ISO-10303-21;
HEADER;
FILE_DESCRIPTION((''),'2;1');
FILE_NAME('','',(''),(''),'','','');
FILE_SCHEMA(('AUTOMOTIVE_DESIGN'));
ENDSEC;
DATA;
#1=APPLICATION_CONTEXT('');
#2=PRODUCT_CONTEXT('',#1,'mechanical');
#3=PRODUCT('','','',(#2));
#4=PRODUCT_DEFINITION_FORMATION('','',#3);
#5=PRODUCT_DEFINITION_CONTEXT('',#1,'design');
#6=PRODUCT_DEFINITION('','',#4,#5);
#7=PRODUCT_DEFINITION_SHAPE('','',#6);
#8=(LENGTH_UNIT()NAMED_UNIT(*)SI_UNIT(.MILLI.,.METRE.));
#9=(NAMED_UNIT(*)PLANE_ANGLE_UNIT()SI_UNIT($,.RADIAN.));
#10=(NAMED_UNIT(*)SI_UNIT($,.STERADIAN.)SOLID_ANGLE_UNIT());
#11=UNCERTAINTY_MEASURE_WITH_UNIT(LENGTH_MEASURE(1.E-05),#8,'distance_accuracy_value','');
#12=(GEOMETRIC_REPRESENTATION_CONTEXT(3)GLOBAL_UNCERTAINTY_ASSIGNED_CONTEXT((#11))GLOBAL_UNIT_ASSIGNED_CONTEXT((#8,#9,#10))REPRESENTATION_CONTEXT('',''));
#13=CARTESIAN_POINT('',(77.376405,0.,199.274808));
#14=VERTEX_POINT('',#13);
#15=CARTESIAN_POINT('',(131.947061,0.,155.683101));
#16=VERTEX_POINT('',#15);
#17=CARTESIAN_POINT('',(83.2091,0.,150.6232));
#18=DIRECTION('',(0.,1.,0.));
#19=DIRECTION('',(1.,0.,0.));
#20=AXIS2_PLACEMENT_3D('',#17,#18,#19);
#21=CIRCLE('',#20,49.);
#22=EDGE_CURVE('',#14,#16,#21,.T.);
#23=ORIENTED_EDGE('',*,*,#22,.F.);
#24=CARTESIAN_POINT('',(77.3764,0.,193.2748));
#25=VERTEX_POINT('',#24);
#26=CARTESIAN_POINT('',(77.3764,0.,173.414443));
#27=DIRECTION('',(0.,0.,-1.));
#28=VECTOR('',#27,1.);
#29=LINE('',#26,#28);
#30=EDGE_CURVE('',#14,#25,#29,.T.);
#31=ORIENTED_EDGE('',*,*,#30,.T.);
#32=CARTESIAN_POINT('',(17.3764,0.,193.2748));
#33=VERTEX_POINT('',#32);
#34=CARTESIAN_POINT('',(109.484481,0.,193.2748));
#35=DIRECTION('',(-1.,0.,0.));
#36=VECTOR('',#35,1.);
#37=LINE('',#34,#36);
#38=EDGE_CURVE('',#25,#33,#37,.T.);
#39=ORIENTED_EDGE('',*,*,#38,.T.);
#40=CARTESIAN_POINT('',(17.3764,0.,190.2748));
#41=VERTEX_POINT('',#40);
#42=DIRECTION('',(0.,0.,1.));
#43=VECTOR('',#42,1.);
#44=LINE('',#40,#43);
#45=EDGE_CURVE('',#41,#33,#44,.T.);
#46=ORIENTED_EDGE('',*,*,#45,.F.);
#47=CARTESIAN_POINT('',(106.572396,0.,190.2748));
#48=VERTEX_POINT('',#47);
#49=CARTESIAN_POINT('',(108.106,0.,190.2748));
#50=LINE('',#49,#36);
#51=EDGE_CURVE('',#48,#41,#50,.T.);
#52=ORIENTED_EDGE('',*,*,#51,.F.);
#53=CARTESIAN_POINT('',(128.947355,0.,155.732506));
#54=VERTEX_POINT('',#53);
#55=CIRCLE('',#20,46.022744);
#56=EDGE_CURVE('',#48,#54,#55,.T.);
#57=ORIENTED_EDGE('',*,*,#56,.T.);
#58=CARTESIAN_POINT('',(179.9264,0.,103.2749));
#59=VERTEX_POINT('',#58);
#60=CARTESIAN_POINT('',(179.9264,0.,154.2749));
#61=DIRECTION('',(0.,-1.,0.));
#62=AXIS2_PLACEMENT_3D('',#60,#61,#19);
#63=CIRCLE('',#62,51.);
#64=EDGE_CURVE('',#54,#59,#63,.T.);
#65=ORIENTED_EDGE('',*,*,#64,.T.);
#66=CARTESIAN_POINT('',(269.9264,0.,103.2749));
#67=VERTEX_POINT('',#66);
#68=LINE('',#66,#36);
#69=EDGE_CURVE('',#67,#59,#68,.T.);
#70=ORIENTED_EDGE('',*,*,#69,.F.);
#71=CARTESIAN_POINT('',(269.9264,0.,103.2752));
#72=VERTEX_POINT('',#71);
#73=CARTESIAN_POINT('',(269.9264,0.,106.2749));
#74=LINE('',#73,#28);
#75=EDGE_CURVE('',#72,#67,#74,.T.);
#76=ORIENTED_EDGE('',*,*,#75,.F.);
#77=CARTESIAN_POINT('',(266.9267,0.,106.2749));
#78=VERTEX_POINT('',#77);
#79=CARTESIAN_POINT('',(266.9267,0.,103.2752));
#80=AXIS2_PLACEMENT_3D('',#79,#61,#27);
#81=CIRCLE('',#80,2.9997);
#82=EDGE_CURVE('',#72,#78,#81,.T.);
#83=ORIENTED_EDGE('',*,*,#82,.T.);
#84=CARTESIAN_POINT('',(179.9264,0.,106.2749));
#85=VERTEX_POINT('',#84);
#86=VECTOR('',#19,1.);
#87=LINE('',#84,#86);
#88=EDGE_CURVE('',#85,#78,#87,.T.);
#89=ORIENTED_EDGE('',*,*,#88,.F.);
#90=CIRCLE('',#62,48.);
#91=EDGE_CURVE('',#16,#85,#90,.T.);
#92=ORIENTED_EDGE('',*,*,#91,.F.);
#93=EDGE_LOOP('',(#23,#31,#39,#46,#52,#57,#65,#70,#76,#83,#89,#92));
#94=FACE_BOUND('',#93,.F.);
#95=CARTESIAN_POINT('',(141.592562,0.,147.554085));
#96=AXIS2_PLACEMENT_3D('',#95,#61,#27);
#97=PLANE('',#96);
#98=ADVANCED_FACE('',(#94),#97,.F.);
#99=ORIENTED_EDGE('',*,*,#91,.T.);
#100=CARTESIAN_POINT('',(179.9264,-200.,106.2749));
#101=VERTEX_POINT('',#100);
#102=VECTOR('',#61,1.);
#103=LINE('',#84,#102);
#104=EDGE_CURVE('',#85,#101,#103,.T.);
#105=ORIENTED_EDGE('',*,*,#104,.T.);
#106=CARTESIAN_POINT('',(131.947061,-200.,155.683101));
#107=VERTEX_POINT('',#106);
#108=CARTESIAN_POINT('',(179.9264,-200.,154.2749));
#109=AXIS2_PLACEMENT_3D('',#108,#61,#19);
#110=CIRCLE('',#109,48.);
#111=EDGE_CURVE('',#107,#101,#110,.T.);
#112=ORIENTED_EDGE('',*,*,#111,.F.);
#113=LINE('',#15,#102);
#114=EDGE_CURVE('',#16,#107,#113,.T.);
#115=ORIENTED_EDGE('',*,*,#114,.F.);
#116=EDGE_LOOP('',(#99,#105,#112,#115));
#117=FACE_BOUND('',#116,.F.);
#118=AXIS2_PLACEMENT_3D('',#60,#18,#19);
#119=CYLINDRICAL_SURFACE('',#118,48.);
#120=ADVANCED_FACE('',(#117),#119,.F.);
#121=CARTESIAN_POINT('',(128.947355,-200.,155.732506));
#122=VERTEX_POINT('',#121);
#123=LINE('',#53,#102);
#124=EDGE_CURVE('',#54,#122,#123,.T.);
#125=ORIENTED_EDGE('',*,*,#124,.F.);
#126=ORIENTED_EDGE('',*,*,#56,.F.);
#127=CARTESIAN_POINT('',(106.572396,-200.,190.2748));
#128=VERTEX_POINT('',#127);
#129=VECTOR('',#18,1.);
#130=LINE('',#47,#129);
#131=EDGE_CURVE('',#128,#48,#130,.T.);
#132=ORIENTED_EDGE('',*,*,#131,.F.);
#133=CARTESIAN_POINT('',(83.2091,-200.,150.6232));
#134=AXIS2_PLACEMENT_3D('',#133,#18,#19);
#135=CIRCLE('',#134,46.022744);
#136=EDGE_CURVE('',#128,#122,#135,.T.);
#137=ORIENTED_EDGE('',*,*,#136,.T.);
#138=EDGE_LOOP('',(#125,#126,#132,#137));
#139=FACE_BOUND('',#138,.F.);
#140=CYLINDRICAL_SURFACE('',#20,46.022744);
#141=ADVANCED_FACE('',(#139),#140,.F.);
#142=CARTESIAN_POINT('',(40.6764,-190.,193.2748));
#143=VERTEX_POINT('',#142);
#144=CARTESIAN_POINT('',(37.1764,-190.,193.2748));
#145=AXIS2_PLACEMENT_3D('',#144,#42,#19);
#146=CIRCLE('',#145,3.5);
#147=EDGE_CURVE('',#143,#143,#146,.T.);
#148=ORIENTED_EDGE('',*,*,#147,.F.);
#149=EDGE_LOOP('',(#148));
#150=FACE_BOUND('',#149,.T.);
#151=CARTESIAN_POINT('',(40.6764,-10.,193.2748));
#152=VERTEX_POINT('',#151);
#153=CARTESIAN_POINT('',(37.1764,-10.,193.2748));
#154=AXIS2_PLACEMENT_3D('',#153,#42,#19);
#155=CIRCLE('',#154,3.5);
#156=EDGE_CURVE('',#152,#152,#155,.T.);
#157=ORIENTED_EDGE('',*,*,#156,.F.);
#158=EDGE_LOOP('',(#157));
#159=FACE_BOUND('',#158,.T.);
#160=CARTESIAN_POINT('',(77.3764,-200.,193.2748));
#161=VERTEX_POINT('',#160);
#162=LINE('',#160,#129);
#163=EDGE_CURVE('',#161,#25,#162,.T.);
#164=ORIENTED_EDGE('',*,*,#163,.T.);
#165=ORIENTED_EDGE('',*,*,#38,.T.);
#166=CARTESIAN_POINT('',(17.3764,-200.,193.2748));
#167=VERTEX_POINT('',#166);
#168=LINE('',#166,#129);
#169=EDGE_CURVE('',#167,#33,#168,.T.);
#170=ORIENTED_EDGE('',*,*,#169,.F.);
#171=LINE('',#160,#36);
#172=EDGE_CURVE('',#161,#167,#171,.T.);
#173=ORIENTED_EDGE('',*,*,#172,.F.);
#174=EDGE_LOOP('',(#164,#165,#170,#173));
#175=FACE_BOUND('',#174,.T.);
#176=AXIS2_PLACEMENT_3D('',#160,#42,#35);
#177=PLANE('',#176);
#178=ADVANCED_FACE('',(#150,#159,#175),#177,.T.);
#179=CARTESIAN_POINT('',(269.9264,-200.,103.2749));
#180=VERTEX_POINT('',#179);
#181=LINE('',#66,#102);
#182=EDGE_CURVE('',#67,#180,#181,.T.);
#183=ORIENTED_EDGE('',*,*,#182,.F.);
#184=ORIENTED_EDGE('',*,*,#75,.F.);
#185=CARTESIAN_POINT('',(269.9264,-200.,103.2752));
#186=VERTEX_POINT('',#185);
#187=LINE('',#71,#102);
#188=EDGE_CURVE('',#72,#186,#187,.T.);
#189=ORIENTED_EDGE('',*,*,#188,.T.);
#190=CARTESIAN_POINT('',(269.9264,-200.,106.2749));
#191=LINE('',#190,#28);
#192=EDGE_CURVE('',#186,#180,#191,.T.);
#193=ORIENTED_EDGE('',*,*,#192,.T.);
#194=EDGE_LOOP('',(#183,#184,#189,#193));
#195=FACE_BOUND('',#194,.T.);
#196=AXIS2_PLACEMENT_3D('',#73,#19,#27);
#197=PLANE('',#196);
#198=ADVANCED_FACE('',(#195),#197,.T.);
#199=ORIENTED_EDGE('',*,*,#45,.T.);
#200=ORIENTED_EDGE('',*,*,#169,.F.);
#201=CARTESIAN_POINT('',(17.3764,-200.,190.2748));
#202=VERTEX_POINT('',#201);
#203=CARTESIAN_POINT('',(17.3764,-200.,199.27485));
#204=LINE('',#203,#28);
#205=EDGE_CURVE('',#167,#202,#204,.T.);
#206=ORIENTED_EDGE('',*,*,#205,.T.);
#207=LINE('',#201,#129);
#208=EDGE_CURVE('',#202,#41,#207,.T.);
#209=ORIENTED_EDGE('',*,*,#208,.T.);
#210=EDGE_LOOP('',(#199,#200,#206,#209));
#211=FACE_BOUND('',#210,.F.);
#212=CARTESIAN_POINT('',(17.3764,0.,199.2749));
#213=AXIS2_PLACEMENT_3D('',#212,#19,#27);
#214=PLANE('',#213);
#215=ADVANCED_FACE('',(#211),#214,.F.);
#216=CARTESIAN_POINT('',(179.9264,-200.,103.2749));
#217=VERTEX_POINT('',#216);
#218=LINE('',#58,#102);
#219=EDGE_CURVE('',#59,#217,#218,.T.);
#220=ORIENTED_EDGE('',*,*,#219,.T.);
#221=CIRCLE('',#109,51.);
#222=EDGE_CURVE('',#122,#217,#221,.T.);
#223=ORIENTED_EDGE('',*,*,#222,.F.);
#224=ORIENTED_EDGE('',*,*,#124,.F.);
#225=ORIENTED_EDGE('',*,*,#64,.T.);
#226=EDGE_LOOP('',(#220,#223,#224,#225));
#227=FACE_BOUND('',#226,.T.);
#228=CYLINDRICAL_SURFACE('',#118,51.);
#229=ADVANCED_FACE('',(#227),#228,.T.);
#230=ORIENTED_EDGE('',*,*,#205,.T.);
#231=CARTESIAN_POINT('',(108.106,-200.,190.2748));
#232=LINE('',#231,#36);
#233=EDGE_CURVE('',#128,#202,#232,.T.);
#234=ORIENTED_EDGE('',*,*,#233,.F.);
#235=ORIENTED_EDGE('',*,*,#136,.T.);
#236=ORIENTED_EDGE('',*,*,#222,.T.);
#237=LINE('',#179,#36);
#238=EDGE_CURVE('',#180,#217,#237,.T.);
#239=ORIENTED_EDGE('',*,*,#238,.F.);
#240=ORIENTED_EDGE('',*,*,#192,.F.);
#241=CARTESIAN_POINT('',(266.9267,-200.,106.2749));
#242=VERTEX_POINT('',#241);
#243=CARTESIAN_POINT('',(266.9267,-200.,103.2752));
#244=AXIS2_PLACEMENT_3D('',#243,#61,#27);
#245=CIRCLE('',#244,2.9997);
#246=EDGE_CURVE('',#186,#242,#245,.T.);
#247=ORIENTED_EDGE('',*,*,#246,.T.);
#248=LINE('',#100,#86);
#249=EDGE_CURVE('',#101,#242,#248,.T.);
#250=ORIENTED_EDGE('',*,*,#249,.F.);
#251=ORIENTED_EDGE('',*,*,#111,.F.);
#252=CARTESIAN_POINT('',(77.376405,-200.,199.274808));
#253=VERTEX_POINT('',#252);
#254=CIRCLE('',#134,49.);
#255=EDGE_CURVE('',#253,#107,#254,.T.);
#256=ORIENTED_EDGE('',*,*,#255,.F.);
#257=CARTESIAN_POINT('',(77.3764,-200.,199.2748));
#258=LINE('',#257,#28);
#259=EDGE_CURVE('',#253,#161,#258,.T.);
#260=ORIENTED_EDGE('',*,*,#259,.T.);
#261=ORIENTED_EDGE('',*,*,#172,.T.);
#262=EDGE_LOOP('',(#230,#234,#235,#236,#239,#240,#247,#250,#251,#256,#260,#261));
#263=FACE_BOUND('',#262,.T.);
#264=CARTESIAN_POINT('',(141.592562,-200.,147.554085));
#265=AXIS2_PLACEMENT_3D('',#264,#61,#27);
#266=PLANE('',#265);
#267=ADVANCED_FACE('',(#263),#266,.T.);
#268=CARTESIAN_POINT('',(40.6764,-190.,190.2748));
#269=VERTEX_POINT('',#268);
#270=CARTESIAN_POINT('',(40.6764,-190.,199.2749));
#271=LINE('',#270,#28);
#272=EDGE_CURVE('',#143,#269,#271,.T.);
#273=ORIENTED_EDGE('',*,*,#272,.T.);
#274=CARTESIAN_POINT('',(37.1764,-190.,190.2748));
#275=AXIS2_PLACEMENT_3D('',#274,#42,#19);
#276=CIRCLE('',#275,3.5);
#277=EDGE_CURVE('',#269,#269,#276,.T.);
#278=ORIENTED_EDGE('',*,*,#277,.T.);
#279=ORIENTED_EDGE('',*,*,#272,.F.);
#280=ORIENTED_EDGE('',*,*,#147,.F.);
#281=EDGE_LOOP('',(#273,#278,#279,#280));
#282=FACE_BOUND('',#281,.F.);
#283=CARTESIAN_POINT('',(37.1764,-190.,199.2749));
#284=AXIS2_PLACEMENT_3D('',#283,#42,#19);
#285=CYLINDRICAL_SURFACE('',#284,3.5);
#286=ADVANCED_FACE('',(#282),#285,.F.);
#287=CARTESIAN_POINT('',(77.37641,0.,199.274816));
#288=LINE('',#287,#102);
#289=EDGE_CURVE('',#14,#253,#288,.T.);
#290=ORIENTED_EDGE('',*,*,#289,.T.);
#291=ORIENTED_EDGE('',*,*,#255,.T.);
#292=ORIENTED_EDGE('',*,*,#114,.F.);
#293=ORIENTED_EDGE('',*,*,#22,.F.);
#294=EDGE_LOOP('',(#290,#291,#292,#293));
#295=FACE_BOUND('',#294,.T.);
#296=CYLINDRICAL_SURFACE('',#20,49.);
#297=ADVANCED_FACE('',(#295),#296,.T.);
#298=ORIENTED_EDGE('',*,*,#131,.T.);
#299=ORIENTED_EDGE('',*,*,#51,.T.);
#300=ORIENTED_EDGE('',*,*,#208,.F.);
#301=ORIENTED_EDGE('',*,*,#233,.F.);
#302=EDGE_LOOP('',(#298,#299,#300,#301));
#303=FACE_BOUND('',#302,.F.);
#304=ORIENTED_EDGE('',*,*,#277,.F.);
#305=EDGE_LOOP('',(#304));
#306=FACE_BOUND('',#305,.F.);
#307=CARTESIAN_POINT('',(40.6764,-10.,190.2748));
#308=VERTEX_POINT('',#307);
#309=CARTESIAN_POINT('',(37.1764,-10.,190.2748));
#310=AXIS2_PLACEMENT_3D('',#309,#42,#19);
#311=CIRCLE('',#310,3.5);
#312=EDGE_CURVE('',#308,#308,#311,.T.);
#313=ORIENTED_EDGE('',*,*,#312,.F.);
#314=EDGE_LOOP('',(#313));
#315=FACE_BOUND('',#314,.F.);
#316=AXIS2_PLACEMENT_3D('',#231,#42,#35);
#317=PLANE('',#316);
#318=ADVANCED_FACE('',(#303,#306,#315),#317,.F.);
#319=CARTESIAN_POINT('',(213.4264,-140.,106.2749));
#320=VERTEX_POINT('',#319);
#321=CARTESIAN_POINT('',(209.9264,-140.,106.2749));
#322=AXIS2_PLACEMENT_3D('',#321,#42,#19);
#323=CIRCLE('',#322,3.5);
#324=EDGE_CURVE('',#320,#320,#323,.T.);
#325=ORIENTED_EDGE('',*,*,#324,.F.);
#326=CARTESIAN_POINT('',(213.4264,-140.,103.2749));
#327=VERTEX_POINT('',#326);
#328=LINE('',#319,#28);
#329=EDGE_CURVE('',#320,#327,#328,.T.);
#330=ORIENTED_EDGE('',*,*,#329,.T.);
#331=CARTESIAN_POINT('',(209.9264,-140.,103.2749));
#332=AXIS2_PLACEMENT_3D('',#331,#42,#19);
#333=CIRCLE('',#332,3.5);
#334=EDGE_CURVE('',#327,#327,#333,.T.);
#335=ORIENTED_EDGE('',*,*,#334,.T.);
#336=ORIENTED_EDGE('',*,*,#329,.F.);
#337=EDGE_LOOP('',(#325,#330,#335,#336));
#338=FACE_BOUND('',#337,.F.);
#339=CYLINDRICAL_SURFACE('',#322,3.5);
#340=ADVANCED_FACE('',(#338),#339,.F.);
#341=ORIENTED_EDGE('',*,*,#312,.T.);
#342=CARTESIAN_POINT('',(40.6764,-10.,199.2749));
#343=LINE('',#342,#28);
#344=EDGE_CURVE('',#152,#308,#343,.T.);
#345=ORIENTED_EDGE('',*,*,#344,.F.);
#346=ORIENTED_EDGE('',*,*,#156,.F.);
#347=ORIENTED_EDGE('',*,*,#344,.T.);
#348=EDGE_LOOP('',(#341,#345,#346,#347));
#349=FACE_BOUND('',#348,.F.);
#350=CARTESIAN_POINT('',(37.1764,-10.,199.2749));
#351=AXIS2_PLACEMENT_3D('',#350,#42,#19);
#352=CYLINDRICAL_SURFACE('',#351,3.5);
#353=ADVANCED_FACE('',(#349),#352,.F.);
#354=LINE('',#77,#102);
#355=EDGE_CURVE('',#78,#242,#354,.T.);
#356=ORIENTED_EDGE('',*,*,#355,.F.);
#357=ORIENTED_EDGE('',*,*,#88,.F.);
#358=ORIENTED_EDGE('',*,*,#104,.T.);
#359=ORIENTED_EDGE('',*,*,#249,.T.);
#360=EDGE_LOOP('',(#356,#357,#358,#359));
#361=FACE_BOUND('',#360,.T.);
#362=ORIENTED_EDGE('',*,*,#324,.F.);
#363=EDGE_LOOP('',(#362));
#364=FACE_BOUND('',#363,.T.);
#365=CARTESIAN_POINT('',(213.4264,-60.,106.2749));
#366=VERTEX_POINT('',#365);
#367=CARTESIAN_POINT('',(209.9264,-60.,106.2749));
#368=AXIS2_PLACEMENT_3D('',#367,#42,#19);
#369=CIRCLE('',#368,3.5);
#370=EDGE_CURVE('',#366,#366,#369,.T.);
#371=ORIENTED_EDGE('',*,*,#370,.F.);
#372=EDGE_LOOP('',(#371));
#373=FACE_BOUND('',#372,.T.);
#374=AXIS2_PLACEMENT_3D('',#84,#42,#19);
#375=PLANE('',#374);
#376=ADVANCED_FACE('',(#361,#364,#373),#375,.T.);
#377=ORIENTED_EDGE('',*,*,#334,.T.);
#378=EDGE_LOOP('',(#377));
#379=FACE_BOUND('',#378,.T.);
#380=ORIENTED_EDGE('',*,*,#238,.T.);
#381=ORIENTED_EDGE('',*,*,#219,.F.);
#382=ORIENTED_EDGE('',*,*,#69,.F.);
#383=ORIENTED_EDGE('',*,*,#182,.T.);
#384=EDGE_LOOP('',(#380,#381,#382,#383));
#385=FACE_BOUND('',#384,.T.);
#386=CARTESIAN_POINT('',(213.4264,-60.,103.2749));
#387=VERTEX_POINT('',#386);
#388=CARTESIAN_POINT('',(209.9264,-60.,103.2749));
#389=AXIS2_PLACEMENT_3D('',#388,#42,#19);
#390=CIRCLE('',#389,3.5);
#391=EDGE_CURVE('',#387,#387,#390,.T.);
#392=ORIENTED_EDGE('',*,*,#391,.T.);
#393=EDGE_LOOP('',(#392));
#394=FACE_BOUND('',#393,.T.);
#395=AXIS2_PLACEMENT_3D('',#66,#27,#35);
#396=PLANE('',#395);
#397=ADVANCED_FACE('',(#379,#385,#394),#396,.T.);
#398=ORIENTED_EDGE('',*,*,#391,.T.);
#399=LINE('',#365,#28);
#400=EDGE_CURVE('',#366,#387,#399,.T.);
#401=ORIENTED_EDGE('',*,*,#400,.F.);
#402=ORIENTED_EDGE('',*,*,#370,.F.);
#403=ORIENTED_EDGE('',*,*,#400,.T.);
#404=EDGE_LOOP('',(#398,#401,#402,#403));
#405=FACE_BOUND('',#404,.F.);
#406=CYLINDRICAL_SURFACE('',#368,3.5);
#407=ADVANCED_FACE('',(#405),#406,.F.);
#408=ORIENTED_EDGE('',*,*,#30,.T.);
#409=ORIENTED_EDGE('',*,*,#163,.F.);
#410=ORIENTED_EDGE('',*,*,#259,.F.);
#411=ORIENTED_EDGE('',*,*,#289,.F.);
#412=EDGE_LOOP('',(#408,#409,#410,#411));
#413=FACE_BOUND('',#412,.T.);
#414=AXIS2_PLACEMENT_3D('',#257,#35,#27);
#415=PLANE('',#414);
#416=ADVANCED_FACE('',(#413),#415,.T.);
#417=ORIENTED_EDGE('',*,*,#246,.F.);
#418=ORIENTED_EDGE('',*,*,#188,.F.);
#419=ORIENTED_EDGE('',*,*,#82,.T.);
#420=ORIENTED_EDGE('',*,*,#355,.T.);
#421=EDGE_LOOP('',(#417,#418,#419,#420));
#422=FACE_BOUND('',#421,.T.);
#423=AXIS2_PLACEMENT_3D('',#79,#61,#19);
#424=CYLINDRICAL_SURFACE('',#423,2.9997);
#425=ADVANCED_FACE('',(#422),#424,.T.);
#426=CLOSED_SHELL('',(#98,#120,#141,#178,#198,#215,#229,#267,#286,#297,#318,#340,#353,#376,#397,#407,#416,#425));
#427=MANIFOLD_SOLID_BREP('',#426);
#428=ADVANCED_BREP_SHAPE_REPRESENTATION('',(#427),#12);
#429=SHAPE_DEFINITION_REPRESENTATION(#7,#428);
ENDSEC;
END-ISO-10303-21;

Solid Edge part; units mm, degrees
sketch "Sketch1" plane through (0, 0, 0) normal (0, -1, 0) x (1, 0, 0)
  line L0 (77.3764, 199.2749) -> (17.3764, 199.2749)
  line L1 (17.3764, 199.2749) -> (17.3764, 196.2749)
  line L2 (17.3764, 196.2749) -> (77.3764, 196.2749)
  arc A0 (77.3764, 196.2749) -> (128.9473, 155.7325) centre (83.2091, 150.6232) cw
  arc A1 (128.9473, 155.7325) -> (179.9264, 103.2749) centre (179.9264, 154.2749) ccw
  line L3 (269.9264, 103.2749) -> (179.9264, 103.2749)
  line L4 (269.9264, 106.2749) -> (269.9264, 103.2749)
  line L5 (179.9264, 106.2749) -> (269.9264, 106.2749)
  arc A2 (131.9471, 155.6831) -> (179.9264, 106.2749) centre (179.9264, 154.2749) ccw
  arc A3 (77.3764, 199.2749) -> (131.9471, 155.6831) centre (83.2091, 150.6232) cw
  dimension "D1" = 3
  dimension "D2" = 60
  dimension "D3" = 90
  dimension "D4" = 3
  dimension "D5" = 90
  dimension "D6" = 102.55
  dimension "D7" = 49
  dimension "D8" = 48
  dimension "D9" = 90
extrude "Protrusion1" add sketch "Sketch1" along normal blind 200
fillet "Verrundung_4" radius 3 1 edges at (269.9264, -100, 106.2749)
sketch "Sketch2" plane through (223.4264, -100, 106.2749) normal (0, 0, 1) x (1, 0, 0)
  circle A0 centre (-13.5, 40) radius 3.5
  circle A1 centre (-13.5, -40) radius 3.5
  dimension "D1" = 7
  dimension "D2" = 80
  dimension "D3" = 60
extrude "Cutout1" cut sketch "Sketch2" against normal through all
sketch "Sketch3" plane through (143.6514, -200, 152.9362) normal (0, -1, 0) x (1, 0, 0)
  line L0 (-126.275, 37.3386) -> (-126.275, 43.3386)
  line L1 (-126.275, 43.3386) -> (-126.275, 46.3386)
  line L2 (-126.275, 46.3386) -> (-66.275, 46.3386)
  line L3 (-66.275, 46.3386) -> (-50.0814, 44.2327)
  line L4 (-50.0814, 44.2327) -> (-37.0073, 38.973)
  line L5 (-37.0073, 38.973) -> (-35.5454, 37.3386)
  line L6 (-35.5454, 37.3386) -> (-126.275, 37.3386)
  dimension "D1" = 6
extrude "Protrusion2" add sketch "Sketch3" against normal up to vertex (200 mm away)
sketch "Sketch4" plane through (47.3764, -100, 199.2749) normal (0, 0, 1) x (1, 0, 0)
  circle A0 centre (-10.2, 90) radius 3.5
  circle A1 centre (-10.2, -90) radius 3.5
  dimension "D1" = 10
  dimension "D2" = 7
  dimension "D3" = 19.8
  dimension "D4" = 10
extrude "Cutout2" cut sketch "Sketch4" against normal through all
sketch "Sketch5" plane through (143.6514, -200, 151.449) normal (0, -1, 0) x (1, 0, 0)
  line L0 (-126.275, 47.8258) -> (-66.275, 47.8258)
  line L1 (-66.275, 47.8258) -> (-66.275, 41.8258)
  line L2 (-66.275, 41.8258) -> (-126.275, 41.8258)
  line L3 (-126.275, 41.8258) -> (-126.275, 47.8258)
extrude "Cutout3" cut sketch "Sketch5" against normal through all
properties material "Nylon, allgemein"
